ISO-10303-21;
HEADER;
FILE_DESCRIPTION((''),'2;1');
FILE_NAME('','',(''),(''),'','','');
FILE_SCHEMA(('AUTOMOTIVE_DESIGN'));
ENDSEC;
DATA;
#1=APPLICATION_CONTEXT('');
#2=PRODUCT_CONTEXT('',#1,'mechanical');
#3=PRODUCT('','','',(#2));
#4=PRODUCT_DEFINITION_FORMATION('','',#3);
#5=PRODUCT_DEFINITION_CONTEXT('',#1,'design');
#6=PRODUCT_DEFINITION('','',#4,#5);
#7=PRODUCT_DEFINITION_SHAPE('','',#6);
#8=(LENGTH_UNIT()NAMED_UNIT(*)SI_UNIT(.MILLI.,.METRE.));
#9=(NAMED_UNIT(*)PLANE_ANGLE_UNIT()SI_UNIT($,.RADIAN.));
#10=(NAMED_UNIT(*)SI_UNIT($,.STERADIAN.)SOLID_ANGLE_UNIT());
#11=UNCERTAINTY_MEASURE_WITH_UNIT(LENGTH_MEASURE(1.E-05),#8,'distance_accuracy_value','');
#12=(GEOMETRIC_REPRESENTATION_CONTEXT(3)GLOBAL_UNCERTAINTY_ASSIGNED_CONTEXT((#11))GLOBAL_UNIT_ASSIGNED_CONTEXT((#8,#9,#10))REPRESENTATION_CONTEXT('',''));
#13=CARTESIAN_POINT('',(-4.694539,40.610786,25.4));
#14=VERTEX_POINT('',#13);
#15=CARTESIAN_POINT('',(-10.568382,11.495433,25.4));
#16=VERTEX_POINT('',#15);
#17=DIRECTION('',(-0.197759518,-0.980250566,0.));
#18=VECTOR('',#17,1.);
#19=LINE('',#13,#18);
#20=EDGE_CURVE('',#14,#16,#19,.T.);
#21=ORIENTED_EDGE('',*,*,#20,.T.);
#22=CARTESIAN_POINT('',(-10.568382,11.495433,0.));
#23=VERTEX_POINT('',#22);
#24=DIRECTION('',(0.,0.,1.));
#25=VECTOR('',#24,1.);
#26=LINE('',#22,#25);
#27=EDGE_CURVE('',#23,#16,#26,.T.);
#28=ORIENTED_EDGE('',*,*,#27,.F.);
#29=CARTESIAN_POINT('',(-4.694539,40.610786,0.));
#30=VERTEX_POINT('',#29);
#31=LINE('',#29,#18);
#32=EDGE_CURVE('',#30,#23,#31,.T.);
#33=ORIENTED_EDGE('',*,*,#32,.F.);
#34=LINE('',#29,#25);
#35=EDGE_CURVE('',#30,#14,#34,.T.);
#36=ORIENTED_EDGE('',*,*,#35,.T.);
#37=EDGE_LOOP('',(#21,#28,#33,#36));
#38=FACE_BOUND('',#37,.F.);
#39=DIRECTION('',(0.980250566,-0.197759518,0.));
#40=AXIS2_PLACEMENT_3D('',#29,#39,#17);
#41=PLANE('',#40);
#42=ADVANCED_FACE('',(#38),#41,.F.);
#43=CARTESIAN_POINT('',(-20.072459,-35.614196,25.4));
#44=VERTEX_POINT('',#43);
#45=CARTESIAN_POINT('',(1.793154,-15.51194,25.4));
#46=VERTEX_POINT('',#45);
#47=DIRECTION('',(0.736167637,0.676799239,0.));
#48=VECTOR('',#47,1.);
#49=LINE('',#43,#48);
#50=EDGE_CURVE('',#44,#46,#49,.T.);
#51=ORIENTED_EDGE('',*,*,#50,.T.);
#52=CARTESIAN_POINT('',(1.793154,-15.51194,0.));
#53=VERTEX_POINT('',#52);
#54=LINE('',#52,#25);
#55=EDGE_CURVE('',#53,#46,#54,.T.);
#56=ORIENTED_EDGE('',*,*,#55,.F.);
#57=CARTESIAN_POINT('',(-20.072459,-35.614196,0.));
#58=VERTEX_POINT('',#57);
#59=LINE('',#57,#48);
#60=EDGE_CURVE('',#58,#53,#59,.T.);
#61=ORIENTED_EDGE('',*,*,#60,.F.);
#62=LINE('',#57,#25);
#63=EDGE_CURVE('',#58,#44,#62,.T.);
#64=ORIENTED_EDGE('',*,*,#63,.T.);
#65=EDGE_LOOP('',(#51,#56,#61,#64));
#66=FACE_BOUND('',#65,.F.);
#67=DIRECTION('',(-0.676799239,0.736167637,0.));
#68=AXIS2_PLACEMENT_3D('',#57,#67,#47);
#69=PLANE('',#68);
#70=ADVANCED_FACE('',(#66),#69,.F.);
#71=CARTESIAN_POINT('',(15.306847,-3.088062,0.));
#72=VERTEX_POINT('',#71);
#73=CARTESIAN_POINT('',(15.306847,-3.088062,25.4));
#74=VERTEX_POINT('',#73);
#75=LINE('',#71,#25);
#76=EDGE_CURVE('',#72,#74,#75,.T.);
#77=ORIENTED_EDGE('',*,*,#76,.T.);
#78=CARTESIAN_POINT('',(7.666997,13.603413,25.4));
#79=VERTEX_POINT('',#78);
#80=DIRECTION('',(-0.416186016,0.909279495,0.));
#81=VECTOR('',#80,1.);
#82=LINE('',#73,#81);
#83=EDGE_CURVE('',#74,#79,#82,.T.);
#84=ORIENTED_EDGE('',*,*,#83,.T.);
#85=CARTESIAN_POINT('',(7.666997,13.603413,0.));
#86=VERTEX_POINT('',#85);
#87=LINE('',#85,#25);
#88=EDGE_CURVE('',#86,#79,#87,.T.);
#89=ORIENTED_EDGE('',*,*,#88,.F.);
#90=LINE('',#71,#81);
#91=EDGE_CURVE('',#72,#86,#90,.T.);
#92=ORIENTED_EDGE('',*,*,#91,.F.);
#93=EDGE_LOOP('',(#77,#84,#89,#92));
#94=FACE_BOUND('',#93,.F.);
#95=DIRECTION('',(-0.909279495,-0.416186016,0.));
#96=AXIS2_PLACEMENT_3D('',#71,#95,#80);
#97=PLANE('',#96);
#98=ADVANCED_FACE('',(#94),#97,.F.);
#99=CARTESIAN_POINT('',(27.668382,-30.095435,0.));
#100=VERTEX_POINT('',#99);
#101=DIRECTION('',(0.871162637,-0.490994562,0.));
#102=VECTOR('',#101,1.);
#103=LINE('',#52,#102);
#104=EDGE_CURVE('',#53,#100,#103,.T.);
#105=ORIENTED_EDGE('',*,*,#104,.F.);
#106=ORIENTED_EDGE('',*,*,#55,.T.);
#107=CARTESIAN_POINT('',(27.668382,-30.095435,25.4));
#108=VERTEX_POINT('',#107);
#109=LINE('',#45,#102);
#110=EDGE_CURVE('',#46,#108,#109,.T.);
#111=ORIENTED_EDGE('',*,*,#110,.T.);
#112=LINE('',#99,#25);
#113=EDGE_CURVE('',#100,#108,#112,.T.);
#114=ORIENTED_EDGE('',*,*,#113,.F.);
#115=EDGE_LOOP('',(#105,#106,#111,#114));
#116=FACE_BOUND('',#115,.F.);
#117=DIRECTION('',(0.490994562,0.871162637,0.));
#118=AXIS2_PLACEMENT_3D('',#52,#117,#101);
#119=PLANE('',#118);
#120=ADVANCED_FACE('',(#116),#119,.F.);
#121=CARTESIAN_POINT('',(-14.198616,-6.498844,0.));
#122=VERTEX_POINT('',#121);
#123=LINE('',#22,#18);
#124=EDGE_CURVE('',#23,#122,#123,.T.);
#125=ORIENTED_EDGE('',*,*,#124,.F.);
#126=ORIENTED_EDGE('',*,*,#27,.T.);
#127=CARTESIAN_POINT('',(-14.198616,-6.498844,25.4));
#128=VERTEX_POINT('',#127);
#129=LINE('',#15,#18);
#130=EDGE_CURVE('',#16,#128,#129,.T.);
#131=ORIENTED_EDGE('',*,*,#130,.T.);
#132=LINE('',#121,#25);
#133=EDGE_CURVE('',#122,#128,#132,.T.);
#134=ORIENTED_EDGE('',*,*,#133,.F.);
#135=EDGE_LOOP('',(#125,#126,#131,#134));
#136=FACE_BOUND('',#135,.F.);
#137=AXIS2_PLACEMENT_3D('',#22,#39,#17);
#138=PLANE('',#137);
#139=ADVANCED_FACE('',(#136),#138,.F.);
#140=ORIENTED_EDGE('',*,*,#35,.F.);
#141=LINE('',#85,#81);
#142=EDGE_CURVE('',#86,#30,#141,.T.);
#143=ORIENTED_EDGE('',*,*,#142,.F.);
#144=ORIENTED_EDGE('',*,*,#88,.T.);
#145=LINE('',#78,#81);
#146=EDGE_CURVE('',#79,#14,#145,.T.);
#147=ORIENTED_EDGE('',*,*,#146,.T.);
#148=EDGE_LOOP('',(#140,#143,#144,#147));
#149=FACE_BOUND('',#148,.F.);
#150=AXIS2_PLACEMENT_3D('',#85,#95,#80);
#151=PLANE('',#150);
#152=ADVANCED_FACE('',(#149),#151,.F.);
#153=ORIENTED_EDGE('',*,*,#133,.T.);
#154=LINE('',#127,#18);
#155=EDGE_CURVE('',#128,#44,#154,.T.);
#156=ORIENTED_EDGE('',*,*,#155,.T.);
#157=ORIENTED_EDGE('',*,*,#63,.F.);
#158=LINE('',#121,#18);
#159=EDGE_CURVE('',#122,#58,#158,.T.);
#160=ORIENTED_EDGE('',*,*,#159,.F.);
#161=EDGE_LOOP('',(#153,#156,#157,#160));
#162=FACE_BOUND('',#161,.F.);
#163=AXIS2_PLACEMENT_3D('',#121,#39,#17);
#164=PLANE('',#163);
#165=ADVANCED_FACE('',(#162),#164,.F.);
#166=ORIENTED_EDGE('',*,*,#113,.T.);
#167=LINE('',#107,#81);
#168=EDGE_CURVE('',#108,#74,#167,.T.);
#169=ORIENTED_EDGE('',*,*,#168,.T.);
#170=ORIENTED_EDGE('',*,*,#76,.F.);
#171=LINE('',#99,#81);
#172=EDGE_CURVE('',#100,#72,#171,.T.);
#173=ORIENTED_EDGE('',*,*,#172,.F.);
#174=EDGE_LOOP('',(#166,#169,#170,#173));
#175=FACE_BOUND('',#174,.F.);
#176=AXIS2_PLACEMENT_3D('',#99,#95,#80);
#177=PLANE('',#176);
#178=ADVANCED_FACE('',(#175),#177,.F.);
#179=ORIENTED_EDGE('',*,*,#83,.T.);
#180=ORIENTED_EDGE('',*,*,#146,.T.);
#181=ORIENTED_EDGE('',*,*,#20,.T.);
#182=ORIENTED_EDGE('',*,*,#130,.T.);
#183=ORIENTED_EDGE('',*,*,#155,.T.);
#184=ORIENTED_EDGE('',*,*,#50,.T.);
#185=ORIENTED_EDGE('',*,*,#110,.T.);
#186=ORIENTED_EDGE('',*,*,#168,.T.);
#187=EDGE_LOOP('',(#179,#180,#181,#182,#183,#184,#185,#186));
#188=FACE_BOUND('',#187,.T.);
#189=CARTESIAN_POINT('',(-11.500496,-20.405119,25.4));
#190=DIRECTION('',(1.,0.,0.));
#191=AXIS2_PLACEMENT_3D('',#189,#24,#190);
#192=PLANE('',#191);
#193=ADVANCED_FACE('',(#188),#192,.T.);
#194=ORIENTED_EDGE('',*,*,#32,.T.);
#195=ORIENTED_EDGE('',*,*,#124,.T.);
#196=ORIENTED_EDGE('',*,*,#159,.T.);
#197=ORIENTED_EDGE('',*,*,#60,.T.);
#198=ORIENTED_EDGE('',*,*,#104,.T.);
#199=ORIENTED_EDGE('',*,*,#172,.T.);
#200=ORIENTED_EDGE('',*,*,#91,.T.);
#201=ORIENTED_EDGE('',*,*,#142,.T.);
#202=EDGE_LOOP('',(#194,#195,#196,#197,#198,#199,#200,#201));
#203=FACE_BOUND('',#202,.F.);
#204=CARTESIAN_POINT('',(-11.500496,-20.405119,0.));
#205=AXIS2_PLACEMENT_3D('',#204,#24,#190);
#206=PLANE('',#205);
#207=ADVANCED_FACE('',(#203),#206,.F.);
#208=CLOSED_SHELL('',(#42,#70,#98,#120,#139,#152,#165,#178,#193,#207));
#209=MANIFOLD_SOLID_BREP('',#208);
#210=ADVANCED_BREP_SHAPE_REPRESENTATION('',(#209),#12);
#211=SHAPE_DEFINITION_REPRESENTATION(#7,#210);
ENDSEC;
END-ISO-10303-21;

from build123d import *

# Parameters (mm, degrees)
F1_DEPTH = 25.4


with BuildPart() as f1:
    # F0 (on Top) → F1 (new body)
    with BuildSketch(Plane.XY):
        Polygon((-20.0724594905, -35.6141963687), (1.793154165, -15.5119398539), (-14.198616368, -6.4988439839), align=None)
        Polygon((1.793154165, -15.5119398539), (15.306846589, -3.0880620772), (7.6669972876, 13.6034125308), (-10.5683816736, 11.4954333843), (-14.198616368, -6.4988439839), align=None)
        Polygon((-10.5683816736, 11.4954333843), (7.6669972876, 13.6034125308), (-4.694538551, 40.6107857691), align=None)
        Polygon((27.6683824276, -30.0954353155), (15.306846589, -3.0880620772), (1.793154165, -15.5119398539), align=None)
    extrude(amount=F1_DEPTH)


solid = f1.part
